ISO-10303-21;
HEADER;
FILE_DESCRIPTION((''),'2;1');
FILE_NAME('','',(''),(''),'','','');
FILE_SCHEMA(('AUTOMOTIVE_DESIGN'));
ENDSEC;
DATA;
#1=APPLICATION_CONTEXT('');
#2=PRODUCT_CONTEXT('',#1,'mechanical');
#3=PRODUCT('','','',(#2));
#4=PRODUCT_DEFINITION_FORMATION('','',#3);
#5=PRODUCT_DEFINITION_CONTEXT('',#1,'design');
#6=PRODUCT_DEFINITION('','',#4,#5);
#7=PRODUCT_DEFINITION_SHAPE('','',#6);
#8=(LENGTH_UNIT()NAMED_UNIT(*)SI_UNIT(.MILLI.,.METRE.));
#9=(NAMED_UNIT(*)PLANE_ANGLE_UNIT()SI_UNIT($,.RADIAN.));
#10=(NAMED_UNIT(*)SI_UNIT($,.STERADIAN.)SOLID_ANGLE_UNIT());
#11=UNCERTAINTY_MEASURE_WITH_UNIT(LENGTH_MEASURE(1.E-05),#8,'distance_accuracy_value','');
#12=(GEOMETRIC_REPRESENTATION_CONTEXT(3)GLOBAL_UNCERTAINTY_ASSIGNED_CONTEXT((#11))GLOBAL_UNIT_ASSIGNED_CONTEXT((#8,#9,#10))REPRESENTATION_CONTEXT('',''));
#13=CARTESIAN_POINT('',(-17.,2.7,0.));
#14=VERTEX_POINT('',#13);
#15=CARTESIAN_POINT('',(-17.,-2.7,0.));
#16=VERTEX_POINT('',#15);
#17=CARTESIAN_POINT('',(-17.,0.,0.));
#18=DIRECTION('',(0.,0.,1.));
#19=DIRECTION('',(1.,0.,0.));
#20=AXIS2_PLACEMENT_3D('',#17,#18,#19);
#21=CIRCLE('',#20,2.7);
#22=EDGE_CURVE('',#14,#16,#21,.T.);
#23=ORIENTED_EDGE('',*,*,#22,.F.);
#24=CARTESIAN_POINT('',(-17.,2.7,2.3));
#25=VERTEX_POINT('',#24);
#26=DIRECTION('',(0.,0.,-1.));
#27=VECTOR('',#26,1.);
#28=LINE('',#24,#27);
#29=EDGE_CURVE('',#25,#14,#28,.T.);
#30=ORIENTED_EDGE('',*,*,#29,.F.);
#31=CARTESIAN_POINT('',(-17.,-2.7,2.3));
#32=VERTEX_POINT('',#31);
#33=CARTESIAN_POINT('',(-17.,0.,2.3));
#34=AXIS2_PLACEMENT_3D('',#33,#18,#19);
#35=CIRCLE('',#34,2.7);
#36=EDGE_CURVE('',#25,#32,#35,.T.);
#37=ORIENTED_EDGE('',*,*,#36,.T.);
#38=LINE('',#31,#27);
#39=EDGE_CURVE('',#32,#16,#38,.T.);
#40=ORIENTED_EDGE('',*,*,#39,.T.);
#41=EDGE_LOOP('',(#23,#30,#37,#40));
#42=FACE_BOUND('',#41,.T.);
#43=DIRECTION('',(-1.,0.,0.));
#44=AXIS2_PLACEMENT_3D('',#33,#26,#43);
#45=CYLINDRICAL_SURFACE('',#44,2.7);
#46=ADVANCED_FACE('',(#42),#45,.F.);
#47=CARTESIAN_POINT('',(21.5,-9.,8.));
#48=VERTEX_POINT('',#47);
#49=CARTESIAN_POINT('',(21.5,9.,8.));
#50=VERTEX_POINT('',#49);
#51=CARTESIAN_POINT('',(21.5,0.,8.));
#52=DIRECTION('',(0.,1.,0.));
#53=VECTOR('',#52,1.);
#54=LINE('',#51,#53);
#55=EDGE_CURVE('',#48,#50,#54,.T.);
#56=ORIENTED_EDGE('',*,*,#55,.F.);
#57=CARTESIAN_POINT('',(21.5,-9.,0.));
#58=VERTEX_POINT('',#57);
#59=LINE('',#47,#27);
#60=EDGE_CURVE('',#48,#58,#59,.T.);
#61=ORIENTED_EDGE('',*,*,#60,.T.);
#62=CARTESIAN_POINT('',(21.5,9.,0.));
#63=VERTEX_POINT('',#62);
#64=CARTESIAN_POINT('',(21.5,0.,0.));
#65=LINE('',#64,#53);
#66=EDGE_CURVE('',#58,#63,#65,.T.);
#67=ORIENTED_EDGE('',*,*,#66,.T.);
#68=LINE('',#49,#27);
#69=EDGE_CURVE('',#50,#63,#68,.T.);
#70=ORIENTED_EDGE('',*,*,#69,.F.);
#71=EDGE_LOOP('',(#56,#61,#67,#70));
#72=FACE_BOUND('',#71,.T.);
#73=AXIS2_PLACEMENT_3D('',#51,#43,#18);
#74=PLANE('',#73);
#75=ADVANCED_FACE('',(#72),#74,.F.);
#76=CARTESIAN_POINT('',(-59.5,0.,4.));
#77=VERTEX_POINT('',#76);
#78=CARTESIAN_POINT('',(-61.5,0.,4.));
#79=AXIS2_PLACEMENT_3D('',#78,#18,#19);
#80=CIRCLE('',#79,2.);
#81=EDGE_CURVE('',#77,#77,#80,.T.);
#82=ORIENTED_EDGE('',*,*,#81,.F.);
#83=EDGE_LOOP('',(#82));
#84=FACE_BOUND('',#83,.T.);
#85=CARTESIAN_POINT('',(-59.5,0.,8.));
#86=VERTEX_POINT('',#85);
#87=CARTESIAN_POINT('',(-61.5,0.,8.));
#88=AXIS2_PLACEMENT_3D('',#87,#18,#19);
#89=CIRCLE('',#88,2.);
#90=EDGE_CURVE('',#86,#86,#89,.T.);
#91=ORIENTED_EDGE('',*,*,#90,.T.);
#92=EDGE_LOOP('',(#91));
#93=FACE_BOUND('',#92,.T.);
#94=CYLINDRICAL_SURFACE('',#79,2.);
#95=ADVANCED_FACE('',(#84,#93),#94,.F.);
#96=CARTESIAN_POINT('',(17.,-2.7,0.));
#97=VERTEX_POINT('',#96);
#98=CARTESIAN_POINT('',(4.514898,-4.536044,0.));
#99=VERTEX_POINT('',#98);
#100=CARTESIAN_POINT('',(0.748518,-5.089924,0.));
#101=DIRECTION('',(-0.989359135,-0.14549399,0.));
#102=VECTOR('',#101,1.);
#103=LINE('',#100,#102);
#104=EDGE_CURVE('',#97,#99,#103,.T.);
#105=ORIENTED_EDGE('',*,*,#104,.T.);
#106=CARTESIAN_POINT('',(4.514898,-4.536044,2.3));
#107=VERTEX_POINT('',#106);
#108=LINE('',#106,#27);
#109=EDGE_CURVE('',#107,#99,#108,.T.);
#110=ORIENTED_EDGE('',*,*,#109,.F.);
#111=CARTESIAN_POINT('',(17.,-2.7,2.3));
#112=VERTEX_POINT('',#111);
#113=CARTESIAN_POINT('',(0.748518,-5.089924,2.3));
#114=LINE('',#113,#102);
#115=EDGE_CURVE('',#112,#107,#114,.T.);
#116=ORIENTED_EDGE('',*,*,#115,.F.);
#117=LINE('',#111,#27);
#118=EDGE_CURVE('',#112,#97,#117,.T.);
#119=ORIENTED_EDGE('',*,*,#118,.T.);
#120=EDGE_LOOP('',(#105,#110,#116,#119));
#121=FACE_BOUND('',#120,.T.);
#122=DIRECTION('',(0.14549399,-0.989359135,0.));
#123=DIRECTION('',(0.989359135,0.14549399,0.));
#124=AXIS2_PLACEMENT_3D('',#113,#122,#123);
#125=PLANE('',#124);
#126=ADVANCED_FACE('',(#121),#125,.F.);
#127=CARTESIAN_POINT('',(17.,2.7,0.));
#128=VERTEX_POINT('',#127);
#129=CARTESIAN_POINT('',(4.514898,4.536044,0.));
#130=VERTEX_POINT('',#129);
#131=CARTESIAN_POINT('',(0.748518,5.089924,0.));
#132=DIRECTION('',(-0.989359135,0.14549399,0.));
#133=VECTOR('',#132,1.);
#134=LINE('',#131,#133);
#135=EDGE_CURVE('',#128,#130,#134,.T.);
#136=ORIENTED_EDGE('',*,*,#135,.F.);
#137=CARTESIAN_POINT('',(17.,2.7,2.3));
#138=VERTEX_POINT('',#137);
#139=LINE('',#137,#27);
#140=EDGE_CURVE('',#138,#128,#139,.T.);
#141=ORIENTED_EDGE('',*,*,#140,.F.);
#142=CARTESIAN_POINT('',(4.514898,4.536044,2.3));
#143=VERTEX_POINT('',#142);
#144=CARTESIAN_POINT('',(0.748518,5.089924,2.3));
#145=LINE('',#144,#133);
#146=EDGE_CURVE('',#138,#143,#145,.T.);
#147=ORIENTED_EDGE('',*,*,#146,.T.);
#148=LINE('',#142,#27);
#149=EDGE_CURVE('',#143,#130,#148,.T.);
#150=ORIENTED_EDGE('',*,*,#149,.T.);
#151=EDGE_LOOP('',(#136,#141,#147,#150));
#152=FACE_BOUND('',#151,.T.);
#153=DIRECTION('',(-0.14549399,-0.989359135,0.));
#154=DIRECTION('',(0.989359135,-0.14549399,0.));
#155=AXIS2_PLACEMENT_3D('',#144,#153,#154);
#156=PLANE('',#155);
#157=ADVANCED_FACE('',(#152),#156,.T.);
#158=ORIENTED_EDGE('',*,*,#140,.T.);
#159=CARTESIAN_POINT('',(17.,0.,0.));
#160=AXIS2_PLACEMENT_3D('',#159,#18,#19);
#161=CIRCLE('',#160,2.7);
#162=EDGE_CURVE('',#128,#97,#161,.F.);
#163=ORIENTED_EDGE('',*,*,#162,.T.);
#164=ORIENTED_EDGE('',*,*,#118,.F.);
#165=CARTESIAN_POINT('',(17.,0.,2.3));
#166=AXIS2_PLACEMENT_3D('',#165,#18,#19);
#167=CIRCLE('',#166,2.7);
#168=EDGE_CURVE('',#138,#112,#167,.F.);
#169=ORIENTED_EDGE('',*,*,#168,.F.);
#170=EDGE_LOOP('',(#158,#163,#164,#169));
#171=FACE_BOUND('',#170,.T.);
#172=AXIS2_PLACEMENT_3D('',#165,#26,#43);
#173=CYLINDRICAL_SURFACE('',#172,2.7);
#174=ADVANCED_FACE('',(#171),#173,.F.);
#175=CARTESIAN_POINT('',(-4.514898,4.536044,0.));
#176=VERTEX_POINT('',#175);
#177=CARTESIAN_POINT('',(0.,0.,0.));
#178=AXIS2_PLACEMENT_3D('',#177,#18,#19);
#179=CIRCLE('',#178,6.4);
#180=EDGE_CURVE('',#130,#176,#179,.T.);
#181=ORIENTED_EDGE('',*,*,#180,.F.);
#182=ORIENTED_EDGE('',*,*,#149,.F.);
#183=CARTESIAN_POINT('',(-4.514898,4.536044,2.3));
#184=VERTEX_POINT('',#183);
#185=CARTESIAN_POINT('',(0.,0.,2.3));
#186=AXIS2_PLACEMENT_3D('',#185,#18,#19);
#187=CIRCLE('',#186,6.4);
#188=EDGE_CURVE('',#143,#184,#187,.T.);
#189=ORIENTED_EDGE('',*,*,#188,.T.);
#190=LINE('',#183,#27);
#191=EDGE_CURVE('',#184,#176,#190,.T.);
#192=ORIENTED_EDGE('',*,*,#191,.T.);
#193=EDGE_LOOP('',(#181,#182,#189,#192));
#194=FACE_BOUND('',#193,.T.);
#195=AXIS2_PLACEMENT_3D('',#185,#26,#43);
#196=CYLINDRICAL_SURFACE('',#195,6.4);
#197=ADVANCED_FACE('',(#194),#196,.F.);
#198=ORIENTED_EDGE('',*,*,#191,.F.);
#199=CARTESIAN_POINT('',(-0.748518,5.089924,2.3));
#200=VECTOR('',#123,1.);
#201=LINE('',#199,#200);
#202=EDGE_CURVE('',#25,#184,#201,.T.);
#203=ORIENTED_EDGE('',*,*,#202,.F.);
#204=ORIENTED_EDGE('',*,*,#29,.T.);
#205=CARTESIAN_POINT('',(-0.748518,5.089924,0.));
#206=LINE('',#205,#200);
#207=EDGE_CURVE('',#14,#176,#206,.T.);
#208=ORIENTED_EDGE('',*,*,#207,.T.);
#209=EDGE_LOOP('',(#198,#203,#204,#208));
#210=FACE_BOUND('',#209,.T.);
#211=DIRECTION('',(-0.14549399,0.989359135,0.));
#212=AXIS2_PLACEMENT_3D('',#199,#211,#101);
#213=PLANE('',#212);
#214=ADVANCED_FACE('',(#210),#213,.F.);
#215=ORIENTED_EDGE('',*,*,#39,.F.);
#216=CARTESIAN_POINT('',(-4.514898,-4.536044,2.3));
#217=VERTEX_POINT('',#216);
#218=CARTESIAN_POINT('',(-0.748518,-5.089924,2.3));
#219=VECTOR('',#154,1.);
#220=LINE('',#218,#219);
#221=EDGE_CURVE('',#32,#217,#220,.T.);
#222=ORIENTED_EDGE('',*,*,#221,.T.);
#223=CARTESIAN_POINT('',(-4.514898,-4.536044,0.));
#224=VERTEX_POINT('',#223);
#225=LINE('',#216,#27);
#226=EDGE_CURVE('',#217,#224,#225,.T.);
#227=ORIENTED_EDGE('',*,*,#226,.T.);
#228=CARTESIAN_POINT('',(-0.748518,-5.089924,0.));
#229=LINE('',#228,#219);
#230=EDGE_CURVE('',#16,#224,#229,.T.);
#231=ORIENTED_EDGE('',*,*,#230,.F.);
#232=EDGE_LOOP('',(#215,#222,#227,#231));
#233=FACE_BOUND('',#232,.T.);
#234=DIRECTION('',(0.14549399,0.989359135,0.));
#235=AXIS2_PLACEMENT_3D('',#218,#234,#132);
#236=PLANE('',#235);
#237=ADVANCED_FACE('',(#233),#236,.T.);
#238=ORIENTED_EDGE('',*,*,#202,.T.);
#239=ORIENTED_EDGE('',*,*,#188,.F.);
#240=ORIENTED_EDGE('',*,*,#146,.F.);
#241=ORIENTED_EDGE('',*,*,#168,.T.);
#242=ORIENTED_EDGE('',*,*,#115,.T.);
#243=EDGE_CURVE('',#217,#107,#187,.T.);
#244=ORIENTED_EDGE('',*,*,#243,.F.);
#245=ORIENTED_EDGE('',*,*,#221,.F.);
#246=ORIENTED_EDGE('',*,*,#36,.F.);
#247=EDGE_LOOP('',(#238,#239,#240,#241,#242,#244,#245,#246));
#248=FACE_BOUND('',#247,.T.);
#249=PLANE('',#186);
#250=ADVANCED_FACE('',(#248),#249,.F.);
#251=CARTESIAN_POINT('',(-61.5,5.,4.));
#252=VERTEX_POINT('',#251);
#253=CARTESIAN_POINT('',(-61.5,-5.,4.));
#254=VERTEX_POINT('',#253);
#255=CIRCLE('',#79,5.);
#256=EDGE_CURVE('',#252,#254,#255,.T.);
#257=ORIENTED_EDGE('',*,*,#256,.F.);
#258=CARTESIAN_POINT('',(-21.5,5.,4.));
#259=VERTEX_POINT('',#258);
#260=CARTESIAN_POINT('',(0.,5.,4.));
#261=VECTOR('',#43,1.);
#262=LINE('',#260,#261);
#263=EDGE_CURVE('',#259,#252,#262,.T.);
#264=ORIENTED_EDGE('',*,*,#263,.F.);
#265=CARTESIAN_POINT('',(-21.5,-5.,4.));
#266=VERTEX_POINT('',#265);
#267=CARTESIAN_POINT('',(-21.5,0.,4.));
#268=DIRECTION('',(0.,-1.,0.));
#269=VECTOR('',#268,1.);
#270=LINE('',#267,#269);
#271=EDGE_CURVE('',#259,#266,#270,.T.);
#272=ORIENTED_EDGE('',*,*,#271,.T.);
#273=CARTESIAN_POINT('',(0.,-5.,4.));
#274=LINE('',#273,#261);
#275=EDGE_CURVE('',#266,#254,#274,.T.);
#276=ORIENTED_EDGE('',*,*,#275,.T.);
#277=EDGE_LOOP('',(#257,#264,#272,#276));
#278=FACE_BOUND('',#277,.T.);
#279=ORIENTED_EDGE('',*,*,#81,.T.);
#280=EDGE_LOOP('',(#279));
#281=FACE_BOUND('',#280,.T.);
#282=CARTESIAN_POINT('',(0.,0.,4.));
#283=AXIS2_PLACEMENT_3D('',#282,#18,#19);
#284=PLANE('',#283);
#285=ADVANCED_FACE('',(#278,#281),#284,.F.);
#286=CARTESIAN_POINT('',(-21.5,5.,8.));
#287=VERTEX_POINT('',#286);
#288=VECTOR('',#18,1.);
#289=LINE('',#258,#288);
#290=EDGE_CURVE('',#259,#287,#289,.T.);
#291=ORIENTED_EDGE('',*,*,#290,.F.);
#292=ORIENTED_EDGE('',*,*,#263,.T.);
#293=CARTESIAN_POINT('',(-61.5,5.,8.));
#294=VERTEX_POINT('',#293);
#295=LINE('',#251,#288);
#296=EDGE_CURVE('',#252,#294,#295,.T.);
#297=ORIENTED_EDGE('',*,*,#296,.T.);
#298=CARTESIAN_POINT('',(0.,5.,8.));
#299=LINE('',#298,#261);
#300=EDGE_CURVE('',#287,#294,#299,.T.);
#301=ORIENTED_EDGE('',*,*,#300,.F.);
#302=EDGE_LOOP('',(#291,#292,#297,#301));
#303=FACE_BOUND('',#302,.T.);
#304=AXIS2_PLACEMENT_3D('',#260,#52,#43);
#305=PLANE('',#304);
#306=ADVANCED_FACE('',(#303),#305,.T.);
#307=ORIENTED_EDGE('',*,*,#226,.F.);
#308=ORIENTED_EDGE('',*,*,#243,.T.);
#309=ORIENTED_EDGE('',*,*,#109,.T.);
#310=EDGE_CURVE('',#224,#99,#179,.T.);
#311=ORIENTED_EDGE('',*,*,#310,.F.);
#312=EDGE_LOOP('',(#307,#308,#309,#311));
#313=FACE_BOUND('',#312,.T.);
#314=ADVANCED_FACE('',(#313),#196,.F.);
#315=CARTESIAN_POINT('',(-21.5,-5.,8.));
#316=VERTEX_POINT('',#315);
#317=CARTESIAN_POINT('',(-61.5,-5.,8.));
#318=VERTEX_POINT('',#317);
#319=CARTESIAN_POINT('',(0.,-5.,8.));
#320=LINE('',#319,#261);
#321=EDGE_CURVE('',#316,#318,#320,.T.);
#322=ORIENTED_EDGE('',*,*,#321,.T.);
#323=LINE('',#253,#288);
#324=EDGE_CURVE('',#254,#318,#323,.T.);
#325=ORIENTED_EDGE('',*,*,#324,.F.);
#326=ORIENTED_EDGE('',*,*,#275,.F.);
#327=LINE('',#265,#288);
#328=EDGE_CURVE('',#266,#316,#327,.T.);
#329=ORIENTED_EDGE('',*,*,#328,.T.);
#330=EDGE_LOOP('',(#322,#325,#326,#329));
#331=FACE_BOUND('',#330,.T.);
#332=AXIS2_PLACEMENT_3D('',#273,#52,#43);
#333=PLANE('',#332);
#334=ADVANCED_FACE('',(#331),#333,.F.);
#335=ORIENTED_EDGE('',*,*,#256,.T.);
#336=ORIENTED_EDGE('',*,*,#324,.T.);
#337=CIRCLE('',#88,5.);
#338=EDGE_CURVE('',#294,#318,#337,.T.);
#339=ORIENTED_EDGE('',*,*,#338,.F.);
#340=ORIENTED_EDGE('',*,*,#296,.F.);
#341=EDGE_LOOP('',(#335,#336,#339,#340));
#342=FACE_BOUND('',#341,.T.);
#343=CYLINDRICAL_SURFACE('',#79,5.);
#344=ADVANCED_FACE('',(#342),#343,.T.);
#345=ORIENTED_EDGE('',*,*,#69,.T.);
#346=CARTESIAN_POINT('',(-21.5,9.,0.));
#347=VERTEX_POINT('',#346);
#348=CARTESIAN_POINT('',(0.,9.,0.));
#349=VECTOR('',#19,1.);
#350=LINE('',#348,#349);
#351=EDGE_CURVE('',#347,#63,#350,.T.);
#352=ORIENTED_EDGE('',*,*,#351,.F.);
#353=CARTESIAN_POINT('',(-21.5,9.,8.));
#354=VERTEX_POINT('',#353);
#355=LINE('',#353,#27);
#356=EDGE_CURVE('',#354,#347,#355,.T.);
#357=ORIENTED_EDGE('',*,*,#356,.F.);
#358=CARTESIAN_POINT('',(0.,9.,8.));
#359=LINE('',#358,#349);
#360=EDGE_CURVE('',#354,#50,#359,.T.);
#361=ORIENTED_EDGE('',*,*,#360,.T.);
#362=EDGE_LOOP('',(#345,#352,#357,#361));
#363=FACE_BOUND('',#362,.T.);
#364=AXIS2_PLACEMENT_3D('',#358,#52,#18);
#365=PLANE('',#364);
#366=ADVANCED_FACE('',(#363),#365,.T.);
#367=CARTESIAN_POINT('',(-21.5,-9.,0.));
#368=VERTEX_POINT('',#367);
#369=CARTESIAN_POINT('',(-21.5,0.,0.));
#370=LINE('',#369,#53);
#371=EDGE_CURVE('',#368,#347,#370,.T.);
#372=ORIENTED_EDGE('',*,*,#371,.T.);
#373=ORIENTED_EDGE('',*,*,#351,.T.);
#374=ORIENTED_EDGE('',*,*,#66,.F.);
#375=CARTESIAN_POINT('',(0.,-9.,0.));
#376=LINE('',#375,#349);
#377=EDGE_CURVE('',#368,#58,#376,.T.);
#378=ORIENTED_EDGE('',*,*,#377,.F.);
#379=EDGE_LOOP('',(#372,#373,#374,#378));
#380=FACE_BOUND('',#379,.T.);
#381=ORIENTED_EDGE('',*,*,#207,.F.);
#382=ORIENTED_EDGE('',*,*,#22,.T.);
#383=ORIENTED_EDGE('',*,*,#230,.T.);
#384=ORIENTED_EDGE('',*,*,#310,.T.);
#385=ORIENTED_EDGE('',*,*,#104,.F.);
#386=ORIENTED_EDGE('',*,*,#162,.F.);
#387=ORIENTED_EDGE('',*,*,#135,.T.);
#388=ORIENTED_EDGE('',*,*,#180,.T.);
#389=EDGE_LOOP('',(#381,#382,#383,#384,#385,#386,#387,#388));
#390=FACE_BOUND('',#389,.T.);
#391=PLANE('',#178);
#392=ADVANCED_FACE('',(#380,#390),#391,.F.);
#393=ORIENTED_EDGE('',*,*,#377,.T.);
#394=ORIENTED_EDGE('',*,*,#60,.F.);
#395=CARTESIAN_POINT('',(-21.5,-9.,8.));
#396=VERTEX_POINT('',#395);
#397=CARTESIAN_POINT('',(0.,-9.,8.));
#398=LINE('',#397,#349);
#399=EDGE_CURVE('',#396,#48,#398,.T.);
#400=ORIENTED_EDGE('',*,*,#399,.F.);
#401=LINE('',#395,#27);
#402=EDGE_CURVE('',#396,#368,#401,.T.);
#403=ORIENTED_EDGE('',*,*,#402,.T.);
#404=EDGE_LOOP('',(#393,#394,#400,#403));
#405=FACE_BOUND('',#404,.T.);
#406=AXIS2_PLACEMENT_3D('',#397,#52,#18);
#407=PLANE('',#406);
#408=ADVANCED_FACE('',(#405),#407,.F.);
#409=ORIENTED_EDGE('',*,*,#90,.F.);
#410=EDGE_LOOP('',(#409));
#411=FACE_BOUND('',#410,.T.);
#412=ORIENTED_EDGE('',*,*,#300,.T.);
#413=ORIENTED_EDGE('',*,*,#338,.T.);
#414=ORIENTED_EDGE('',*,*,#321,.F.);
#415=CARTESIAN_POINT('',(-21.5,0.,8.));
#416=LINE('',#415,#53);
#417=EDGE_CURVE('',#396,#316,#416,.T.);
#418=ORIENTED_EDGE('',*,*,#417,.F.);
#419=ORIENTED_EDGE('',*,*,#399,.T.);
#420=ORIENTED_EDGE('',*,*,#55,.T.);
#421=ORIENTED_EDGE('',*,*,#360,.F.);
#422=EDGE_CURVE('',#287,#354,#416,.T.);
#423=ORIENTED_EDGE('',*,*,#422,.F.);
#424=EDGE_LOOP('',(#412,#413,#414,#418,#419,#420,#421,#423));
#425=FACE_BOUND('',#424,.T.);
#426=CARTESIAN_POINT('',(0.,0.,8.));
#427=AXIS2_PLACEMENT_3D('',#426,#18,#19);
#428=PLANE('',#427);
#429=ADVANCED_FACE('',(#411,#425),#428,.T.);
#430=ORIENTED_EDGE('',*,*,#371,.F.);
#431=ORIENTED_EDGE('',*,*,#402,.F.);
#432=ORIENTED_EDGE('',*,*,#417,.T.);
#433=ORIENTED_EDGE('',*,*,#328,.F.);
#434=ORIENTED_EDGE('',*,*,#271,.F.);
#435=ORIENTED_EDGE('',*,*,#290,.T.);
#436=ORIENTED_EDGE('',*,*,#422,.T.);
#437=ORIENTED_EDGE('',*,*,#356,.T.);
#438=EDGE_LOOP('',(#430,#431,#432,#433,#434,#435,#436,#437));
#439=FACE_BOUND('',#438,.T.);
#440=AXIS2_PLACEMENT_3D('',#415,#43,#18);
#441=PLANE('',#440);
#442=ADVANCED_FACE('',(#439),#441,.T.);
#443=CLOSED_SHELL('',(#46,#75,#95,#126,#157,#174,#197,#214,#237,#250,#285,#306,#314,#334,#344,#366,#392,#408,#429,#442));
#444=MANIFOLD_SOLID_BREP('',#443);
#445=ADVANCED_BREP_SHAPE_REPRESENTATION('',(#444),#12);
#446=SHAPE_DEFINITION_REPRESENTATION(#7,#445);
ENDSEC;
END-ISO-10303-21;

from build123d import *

# Parameters (mm, degrees)
SKETCH1_W           = 43
SKETCH1_H           = 18
BOSS_EXTRUDE1_DEPTH = 8
CAVITY2_DEPTH       = 2.3
BOSS_EXTRUDE2_DEPTH = 4


# Read off the part's stored shape, not the designer's step: Cavity2
with BuildPart() as part:
    # Sketch1 → Boss-Extrude1 (new body)
    with BuildSketch(Plane.XY):
        Rectangle(SKETCH1_W, SKETCH1_H)
    extrude(amount=BOSS_EXTRUDE1_DEPTH)

    # Cavity2 outline → Cavity2 (cut)
    with BuildSketch(Plane.XY):
        with BuildLine():
            ThreePointArc((-4.514897629, -4.536044466), (0, -6.4), (4.514897629, -4.536044466))
            Line((4.514897629, -4.536044466), (17, -2.7))
            ThreePointArc((17, -2.7), (19.7, 0), (17, 2.7))
            Line((17, 2.7), (4.514897629, 4.536044466))
            ThreePointArc((4.514897629, 4.536044466), (0, 6.4), (-4.514897629, 4.536044466))
            Line((-4.514897629, 4.536044466), (-17, 2.7))
            ThreePointArc((-17, 2.7), (-19.7, 0), (-17, -2.7))
            Line((-17, -2.7), (-4.514897629, -4.536044466))
        make_face()
    extrude(amount=CAVITY2_DEPTH, mode=Mode.SUBTRACT)

    # Sketch4 → Boss-Extrude2 (add)
    with BuildSketch(Plane.XY.offset(8)):
        with BuildLine():
            ThreePointArc((-56.5, 0), (-57.964466094, 3.535533906), (-61.5, 5))
            Line((-61.5, 5), (-61.5, 2))
            ThreePointArc((-61.5, 2), (-60.085786438, 1.414213562), (-59.5, 0))
            ThreePointArc((-59.5, 0), (-60.085786438, -1.414213562), (-61.5, -2))
            Line((-61.5, -2), (-61.5, -5))
            ThreePointArc((-61.5, -5), (-57.964466094, -3.535533906), (-56.5, 0))
        make_face()
        with BuildLine():
            Line((-61.5, 2), (-61.5, 5))
            ThreePointArc((-61.5, 5), (-66.5, 0), (-61.5, -5))
            Line((-61.5, -5), (-61.5, -2))
            ThreePointArc((-61.5, -2), (-63.5, 0), (-61.5, 2))
        make_face()
        with BuildLine():
            Line((-21.5, -5), (-21.5, 5))
            Line((-21.5, 5), (-61.5, 5))
            ThreePointArc((-61.5, 5), (-57.964466094, 3.535533906), (-56.5, 0))
            ThreePointArc((-56.5, 0), (-57.964466094, -3.535533906), (-61.5, -5))
            Line((-61.5, -5), (-21.5, -5))
        make_face()
    extrude(amount=-BOSS_EXTRUDE2_DEPTH)


solid = part.part
